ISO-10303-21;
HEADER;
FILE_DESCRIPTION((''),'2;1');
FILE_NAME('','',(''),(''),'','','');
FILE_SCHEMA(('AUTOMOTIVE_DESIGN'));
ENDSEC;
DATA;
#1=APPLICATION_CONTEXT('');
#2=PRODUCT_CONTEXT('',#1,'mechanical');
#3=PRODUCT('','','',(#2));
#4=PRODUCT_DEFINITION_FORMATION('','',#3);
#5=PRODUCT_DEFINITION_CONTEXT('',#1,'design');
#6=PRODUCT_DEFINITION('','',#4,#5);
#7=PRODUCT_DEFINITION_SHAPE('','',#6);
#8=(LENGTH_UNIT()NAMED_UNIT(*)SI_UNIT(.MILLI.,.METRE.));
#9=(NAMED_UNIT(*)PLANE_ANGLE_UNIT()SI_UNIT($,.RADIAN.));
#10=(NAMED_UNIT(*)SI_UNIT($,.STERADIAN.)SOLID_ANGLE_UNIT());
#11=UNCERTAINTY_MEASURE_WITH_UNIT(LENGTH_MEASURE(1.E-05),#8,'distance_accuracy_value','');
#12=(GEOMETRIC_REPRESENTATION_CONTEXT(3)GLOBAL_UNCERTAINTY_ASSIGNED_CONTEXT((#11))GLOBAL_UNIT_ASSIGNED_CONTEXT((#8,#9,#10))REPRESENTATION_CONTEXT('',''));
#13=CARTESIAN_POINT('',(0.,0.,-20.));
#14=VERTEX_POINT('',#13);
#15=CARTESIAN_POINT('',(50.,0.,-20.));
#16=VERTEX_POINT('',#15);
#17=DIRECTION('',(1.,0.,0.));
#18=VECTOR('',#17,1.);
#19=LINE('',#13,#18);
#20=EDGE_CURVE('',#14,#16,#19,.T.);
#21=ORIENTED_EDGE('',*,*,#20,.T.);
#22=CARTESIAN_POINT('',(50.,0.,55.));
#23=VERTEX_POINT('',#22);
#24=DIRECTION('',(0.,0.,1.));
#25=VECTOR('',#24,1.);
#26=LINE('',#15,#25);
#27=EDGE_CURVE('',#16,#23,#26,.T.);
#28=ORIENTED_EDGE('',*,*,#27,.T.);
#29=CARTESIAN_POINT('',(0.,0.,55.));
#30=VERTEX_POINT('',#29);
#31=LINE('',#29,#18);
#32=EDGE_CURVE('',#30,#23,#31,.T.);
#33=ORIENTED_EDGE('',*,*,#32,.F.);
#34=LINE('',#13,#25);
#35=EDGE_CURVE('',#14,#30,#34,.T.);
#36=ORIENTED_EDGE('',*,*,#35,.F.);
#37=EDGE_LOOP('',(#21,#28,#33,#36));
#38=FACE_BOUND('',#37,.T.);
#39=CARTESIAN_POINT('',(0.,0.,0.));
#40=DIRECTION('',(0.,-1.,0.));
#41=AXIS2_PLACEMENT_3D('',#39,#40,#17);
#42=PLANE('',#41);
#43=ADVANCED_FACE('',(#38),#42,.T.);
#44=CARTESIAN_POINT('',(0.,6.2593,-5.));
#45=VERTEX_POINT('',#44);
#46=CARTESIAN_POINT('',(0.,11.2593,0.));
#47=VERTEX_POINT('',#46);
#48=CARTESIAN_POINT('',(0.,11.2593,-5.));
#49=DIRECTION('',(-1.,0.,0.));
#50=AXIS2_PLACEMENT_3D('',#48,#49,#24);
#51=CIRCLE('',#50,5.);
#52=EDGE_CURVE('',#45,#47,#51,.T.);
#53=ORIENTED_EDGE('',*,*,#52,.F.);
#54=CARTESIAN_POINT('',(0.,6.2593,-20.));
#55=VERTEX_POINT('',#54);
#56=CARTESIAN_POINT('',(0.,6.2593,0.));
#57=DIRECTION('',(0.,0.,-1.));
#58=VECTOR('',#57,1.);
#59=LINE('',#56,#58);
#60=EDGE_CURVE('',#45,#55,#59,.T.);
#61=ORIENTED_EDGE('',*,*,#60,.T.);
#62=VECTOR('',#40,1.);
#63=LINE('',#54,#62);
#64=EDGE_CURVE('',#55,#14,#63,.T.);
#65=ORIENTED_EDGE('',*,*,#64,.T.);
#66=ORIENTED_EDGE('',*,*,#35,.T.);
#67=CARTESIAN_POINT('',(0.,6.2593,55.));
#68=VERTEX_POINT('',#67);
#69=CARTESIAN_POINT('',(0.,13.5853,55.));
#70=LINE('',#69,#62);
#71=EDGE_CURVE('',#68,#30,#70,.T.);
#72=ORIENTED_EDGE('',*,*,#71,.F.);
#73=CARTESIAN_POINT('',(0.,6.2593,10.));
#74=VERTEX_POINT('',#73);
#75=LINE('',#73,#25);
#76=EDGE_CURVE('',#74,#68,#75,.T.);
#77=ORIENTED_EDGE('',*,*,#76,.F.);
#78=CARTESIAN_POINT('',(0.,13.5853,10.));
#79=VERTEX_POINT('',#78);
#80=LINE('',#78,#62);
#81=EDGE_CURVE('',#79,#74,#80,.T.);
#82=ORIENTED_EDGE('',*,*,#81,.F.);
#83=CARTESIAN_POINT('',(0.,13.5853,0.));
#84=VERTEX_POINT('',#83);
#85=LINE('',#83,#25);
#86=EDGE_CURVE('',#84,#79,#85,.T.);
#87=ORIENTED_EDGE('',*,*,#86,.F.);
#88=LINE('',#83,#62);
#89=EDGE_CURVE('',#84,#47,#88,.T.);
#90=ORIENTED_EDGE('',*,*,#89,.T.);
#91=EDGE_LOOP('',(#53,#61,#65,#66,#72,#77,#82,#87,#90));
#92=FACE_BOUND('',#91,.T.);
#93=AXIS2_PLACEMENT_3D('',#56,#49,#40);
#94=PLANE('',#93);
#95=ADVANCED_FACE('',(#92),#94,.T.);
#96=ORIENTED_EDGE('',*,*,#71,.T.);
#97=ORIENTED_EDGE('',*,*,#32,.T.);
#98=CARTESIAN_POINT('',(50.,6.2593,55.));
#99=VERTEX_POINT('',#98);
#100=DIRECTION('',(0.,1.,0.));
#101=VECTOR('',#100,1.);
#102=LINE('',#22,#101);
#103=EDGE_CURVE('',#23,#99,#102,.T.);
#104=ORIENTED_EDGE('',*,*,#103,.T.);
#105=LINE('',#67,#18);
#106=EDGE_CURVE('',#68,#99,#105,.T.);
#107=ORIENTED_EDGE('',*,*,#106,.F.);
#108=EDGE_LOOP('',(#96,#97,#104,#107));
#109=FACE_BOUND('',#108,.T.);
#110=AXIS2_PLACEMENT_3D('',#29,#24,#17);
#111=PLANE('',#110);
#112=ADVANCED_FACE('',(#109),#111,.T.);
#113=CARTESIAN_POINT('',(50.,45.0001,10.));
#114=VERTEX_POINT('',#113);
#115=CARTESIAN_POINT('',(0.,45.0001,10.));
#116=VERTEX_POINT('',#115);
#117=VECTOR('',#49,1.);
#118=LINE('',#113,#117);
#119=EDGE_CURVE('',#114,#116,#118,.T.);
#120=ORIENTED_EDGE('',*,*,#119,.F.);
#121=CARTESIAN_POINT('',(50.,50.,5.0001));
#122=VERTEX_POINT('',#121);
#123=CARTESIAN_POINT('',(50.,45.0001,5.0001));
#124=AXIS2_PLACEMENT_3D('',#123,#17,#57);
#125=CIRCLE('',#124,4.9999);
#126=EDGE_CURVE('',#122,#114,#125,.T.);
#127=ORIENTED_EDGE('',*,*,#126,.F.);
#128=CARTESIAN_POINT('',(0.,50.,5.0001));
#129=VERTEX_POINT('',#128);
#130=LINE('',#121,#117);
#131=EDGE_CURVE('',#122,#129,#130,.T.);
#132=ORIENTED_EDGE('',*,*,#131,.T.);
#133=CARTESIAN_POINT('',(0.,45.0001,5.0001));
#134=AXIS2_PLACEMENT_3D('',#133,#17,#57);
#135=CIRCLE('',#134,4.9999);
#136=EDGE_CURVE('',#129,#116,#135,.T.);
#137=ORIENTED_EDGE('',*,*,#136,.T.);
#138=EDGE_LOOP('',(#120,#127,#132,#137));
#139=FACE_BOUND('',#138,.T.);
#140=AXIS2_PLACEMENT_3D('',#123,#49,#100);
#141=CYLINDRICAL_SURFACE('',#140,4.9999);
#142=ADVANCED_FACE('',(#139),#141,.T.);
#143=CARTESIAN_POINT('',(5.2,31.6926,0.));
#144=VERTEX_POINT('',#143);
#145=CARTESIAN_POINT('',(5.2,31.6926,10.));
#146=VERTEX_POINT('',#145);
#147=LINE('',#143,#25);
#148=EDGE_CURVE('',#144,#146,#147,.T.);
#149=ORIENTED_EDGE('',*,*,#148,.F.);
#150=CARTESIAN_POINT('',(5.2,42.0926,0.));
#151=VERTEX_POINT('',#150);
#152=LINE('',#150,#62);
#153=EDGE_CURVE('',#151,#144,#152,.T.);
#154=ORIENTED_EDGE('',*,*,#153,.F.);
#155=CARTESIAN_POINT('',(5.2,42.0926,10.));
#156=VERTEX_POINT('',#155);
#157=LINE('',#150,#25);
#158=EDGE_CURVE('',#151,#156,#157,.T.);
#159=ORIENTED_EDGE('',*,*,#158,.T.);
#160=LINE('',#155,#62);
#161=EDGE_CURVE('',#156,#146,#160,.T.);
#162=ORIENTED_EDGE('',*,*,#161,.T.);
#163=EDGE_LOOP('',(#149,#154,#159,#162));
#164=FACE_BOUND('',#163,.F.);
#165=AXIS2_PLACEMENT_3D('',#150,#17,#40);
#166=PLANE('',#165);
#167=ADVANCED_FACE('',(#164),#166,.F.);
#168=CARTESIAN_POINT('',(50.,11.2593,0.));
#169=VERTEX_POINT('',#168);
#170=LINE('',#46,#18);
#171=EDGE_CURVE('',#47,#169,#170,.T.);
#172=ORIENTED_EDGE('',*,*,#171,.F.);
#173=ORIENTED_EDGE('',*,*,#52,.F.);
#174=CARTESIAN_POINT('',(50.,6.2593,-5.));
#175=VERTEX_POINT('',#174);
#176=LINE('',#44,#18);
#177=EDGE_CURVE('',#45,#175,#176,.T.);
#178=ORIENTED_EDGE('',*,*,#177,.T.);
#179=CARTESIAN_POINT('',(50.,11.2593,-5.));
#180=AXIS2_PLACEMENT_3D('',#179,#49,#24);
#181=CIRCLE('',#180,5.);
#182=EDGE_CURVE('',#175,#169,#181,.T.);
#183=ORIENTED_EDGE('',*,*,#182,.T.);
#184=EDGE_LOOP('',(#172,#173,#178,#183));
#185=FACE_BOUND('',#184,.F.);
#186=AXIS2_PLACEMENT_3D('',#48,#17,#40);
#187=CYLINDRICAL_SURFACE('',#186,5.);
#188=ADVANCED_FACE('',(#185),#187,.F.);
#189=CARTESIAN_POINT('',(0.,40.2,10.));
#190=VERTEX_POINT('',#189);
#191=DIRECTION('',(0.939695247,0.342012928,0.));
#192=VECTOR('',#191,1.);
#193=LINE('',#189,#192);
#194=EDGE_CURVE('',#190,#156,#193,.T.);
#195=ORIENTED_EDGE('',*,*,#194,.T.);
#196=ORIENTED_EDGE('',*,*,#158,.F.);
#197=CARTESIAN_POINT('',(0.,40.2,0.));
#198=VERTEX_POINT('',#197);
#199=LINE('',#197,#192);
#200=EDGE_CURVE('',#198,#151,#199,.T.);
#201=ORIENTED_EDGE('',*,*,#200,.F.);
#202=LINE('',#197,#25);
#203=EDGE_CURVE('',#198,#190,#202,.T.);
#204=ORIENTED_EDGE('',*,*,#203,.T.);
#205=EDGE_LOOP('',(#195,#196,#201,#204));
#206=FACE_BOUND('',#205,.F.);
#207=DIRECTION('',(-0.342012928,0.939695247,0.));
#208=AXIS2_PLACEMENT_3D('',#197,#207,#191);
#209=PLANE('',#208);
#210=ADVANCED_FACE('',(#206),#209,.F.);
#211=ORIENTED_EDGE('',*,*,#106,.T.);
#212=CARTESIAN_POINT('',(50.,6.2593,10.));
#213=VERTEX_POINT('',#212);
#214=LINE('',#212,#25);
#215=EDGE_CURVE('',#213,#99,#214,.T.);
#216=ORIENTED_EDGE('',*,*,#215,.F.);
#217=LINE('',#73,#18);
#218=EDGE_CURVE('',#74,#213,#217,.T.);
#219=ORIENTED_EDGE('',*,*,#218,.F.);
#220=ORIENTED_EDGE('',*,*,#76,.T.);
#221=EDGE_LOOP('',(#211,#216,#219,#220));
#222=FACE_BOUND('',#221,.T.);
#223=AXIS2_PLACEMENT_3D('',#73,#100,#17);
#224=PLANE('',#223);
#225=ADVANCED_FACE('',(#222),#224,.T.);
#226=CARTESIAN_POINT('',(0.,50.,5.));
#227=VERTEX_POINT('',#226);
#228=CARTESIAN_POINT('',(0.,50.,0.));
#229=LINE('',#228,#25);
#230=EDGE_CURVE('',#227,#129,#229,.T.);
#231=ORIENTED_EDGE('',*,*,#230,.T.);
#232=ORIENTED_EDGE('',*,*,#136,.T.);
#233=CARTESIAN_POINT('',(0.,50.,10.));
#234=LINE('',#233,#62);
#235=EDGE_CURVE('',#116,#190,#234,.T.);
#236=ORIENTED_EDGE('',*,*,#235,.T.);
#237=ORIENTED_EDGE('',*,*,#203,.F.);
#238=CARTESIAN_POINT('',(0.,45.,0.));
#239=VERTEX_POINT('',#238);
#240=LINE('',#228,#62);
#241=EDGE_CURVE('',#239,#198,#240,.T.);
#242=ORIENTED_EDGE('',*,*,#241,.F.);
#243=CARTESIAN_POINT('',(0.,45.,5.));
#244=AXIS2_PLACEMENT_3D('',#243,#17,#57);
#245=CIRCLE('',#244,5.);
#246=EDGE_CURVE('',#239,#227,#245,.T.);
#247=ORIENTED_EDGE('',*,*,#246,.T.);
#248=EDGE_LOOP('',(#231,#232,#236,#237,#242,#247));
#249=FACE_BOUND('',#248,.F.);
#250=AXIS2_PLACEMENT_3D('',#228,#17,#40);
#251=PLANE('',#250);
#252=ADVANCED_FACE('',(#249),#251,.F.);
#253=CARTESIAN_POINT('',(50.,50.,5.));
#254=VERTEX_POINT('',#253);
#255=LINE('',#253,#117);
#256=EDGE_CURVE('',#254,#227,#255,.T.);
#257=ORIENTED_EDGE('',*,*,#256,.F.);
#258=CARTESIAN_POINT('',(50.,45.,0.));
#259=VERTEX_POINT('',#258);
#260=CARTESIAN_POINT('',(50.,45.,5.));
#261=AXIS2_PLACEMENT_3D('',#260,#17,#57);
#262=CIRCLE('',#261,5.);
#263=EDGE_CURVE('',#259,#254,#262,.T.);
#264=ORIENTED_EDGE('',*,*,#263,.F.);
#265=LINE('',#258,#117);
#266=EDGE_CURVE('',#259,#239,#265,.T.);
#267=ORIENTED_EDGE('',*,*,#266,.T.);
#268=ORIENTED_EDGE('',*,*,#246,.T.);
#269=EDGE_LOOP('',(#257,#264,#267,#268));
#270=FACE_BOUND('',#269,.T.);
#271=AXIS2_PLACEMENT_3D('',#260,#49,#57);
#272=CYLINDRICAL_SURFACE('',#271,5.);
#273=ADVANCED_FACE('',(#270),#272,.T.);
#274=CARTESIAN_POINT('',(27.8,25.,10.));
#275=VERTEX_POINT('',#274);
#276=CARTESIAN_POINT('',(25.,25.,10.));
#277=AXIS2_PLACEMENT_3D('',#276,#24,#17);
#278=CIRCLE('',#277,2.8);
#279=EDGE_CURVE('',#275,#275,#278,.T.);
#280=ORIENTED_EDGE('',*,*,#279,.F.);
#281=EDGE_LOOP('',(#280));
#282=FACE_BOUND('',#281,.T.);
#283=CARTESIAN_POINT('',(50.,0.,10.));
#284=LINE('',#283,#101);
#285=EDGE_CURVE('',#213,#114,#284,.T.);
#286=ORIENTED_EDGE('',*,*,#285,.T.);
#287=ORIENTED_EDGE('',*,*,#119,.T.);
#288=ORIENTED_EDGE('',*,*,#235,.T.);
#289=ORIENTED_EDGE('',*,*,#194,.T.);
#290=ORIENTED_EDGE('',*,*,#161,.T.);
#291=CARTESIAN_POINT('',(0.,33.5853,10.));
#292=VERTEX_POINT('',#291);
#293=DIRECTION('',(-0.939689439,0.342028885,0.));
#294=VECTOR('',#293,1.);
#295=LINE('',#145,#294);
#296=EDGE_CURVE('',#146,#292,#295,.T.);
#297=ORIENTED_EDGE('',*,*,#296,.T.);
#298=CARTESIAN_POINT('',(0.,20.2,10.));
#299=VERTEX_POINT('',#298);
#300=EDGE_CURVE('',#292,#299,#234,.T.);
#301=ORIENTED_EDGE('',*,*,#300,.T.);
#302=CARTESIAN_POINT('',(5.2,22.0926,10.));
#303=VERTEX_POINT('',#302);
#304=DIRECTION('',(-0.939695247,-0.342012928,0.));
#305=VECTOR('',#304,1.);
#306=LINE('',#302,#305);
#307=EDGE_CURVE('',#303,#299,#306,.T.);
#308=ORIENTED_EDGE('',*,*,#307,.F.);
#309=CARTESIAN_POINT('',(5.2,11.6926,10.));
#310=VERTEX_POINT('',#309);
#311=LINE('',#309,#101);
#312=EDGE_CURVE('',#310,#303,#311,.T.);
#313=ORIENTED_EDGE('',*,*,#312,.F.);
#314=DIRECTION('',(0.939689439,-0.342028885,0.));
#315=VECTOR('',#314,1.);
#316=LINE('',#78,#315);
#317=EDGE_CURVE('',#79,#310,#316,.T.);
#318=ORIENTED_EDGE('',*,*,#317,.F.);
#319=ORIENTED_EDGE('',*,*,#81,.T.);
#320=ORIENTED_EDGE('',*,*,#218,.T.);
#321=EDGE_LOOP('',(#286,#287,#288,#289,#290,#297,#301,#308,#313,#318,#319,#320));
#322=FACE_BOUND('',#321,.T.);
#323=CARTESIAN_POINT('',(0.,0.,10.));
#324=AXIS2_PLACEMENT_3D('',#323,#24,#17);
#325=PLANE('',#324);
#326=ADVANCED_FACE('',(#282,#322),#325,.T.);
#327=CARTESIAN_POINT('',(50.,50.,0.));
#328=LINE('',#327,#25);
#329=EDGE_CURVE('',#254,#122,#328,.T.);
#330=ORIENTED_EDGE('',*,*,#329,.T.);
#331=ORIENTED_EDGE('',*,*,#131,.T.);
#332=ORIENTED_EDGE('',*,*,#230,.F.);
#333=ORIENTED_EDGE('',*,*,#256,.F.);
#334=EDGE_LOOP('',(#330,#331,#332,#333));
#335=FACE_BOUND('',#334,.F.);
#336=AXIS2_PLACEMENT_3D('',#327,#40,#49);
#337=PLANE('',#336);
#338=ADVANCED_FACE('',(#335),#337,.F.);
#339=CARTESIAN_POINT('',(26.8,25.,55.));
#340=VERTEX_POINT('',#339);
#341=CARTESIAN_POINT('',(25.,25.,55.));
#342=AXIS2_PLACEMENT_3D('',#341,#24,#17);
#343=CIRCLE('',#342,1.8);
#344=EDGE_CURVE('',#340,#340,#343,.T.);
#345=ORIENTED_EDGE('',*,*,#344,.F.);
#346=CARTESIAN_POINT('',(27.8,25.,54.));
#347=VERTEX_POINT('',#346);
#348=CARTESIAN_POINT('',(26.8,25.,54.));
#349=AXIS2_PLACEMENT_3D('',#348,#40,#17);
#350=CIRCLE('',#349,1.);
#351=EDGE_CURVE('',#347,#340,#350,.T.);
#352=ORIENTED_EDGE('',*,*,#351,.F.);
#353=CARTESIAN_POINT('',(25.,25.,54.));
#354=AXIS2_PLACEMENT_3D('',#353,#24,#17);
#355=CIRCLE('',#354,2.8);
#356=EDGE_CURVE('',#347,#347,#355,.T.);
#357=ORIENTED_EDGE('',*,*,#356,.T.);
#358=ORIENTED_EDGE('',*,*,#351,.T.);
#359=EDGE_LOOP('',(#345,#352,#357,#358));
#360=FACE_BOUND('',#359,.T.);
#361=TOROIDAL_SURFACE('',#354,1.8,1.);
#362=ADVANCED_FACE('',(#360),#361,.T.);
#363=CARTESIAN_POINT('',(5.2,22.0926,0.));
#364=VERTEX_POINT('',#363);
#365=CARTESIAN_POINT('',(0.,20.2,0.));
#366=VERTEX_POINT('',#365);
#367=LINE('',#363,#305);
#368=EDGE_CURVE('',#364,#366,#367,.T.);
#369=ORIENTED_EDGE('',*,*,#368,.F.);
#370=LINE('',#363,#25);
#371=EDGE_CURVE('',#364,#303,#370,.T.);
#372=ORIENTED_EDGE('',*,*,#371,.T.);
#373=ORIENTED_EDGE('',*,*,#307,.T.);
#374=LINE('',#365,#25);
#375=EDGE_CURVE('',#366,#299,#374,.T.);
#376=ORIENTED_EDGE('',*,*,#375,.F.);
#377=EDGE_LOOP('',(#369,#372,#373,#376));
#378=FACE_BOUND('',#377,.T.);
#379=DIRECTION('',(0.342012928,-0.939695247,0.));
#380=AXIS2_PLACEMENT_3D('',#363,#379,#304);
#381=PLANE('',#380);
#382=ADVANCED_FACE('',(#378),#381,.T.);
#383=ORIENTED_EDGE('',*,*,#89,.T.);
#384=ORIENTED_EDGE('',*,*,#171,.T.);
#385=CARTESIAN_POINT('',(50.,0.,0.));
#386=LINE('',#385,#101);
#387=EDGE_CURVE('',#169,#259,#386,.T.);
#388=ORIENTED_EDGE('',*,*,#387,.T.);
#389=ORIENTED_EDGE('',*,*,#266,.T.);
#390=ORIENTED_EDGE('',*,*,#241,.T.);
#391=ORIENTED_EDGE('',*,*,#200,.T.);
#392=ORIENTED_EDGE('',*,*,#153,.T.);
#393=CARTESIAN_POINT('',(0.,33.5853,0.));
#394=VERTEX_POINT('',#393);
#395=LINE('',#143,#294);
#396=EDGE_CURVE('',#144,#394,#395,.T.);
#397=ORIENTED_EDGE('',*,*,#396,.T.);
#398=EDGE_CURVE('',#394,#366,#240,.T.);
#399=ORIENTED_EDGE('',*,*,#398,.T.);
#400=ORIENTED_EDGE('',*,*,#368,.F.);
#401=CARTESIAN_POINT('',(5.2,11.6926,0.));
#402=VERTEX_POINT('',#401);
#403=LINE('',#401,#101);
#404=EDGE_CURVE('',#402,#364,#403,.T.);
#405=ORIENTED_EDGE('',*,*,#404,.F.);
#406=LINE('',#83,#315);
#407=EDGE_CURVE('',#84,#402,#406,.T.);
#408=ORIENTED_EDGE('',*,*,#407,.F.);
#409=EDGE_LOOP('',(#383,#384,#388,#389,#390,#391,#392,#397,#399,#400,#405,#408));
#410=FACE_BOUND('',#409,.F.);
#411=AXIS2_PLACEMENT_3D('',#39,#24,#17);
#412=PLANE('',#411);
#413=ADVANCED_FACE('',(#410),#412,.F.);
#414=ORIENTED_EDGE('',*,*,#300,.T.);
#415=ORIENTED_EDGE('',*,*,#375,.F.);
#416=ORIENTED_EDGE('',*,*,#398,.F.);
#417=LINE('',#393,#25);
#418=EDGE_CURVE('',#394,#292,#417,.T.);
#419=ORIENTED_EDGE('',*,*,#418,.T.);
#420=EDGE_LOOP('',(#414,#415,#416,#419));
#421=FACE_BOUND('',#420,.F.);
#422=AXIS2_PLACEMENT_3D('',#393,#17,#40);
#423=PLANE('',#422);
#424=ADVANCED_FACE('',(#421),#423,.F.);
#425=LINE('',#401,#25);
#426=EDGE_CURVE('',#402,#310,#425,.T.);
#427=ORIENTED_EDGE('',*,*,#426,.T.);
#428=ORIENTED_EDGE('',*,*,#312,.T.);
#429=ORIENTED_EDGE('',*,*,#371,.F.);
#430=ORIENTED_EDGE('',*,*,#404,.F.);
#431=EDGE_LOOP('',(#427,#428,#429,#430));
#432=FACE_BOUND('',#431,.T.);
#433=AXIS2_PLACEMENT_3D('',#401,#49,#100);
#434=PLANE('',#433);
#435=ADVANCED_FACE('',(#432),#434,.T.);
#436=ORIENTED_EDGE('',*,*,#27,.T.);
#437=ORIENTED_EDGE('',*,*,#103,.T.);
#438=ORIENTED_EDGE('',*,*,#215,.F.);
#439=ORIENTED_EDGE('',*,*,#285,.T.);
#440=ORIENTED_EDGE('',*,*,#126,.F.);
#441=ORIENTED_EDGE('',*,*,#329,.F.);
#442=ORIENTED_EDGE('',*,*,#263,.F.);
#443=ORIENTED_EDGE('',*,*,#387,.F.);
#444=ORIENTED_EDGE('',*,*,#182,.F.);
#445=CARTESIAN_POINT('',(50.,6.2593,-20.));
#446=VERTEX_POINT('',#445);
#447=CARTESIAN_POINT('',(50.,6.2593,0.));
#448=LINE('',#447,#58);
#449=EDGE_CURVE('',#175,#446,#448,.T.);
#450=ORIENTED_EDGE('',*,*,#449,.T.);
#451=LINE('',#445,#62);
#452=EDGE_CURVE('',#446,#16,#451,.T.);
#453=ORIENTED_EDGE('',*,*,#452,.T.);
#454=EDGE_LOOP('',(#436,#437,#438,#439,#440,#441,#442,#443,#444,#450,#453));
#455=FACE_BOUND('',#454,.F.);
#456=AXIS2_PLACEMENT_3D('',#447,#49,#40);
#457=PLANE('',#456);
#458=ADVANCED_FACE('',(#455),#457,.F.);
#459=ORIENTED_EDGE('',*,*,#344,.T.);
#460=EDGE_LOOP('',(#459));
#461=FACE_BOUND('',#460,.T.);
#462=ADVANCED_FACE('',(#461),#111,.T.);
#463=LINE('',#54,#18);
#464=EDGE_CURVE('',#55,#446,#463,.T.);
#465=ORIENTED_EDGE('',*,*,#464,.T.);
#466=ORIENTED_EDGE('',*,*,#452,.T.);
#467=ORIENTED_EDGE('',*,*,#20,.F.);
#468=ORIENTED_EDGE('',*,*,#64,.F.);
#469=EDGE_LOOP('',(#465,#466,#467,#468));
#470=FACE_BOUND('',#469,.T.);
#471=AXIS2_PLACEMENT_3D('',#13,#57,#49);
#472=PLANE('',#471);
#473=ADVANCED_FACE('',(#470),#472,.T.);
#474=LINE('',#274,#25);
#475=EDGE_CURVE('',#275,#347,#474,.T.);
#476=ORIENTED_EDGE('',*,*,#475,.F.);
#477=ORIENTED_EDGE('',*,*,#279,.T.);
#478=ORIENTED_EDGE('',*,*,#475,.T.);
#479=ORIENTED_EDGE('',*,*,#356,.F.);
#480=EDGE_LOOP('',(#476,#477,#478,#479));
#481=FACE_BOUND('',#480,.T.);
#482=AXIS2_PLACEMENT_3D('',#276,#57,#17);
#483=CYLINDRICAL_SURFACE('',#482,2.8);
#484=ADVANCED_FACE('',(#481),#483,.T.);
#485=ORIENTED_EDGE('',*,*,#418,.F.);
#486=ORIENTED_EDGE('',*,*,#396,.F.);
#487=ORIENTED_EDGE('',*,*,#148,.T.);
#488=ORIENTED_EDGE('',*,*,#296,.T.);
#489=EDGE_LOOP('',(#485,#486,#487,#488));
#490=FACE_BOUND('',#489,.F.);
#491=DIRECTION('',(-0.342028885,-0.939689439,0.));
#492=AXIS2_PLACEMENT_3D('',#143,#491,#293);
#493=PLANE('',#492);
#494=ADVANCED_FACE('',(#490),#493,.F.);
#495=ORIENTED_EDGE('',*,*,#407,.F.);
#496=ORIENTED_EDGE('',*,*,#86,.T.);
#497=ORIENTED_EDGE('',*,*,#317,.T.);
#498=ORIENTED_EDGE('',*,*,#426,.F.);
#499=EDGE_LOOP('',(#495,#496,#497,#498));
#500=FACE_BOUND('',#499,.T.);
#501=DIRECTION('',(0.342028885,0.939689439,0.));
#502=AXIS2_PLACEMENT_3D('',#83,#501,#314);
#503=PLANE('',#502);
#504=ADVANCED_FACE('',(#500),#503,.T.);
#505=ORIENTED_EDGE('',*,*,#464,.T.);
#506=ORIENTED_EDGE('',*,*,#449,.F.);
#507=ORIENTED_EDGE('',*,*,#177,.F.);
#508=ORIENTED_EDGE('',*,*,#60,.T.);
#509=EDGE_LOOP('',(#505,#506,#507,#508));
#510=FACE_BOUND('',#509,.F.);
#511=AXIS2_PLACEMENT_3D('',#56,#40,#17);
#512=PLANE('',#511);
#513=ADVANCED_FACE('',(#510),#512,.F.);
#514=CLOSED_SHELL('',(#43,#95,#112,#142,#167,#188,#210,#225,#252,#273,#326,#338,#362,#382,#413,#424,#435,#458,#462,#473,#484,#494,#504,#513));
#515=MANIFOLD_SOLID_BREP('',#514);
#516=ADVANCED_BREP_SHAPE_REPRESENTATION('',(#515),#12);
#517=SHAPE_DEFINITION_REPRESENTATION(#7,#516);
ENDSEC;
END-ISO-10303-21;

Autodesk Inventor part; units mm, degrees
ref_plane "YZ Plane" through (0, 0, 0) normal (1, 0, 0) x (0, 1, 0)
ref_plane "XZ Plane" through (0, 0, 0) normal (0, 1, 0) x (-1, 0, 0)
ref_plane "XY Plane" through (0, 0, 0) normal (0, 0, 1) x (1, 0, 0)
sketch "Sketch1" plane through (0, 0, 0) normal (0, 0, 1) x (1, 0, 0)
  line L0 (0, 0) -> (50, 0)
  line L1 (50, 0) -> (50, 50)
  line L2 (50, 50) -> (0, 50)
  line L3 (0, 13.5853) -> (5.2, 11.6926)
  line L4 (5.2, 11.6926) -> (5.2, 22.0926)
  line L5 (5.2, 22.0926) -> (0, 20.2)
  line L6 (0, 50) -> (0, 20.2)
  line L7 (0, 13.5853) -> (0, 0)
  line L8 (0, 40.2) -> (5.2, 42.0926)
  line L9 (5.2, 42.0926) -> (5.2, 31.6926)
  line L10 (5.2, 31.6926) -> (0, 33.5853)
  dimension "d0" = 50
  dimension "d1" = 50
  dimension "d2" = 50
  dimension "d8" = 10.4
  dimension "d9" = 70
  dimension "d10" = 70
  dimension "d11" = 20.2
  dimension "d12" = 5.2
  dimension "d13" = 5.2
  dimension "d14" = 10.4
  dimension "d15" = 40.2
  dimension "d16" = 70
  dimension "d17" = 70
  dimension "d18" = 6.6147
  dimension "d19" = 6.6147
  dimension "d26" = 13.5853
extrude "Extrusion1" add sketch "Sketch1" along normal blind 10 contours L7 L3 L4 L5 L6 L10 L9 L8 L2 L1 L0
sketch "Sketch2" plane through (0, 0, 10) normal (0, 0, 1) x (1, 0, 0)
  line L0 (0, 13.5853) -> (0, 0) projected
  line L1 (0, 0) -> (50, 0)
  line L2 (50, 0) -> (50, 6.2593)
  line L3 (50, 0) -> (50, 50) projected
  line L4 (0, 0) -> (0, 6.2593)
  line L5 (0, 0) -> (50, 0) projected
  line L6 (0, 6.2593) -> (50, 6.2593)
  circle A0 centre (25, 25) radius 2.8
  dimension "d23" = 5.6
extrude "Extrusion2" add sketch "Sketch2" along normal blind 45
sketch "Sketch3" plane through (0, 0, 0) normal (0, 0, -1) x (-1, 0, 0)
  line L0 (0, 6.2593) -> (-50, 6.2593) projected
  line L1 (0, 6.2593) -> (-50, 6.2593)
  line L2 (0, 0) -> (-50, 0) projected
  line L3 (-50, 6.2593) -> (-50, 0)
  line L4 (-50, 0) -> (0, 0)
  line L5 (0, 6.2593) -> (0, 0) projected
  line L6 (0, 0) -> (0, 6.2593)
extrude "Extrusion3" add sketch "Sketch3" along normal blind 20
fillet "Fillet1" radius 5 1 edges at (25, 6.2593, 0)
fillet "Fillet2" radius 5 1 edges at (25, 50, 0)
fillet "Fillet3" radius 5 1 edges at (25, 50, 10)
fillet "Fillet4" radius 1 1 edges at (22.2, 25, 55)
properties part number "SpoolWinderBase"
